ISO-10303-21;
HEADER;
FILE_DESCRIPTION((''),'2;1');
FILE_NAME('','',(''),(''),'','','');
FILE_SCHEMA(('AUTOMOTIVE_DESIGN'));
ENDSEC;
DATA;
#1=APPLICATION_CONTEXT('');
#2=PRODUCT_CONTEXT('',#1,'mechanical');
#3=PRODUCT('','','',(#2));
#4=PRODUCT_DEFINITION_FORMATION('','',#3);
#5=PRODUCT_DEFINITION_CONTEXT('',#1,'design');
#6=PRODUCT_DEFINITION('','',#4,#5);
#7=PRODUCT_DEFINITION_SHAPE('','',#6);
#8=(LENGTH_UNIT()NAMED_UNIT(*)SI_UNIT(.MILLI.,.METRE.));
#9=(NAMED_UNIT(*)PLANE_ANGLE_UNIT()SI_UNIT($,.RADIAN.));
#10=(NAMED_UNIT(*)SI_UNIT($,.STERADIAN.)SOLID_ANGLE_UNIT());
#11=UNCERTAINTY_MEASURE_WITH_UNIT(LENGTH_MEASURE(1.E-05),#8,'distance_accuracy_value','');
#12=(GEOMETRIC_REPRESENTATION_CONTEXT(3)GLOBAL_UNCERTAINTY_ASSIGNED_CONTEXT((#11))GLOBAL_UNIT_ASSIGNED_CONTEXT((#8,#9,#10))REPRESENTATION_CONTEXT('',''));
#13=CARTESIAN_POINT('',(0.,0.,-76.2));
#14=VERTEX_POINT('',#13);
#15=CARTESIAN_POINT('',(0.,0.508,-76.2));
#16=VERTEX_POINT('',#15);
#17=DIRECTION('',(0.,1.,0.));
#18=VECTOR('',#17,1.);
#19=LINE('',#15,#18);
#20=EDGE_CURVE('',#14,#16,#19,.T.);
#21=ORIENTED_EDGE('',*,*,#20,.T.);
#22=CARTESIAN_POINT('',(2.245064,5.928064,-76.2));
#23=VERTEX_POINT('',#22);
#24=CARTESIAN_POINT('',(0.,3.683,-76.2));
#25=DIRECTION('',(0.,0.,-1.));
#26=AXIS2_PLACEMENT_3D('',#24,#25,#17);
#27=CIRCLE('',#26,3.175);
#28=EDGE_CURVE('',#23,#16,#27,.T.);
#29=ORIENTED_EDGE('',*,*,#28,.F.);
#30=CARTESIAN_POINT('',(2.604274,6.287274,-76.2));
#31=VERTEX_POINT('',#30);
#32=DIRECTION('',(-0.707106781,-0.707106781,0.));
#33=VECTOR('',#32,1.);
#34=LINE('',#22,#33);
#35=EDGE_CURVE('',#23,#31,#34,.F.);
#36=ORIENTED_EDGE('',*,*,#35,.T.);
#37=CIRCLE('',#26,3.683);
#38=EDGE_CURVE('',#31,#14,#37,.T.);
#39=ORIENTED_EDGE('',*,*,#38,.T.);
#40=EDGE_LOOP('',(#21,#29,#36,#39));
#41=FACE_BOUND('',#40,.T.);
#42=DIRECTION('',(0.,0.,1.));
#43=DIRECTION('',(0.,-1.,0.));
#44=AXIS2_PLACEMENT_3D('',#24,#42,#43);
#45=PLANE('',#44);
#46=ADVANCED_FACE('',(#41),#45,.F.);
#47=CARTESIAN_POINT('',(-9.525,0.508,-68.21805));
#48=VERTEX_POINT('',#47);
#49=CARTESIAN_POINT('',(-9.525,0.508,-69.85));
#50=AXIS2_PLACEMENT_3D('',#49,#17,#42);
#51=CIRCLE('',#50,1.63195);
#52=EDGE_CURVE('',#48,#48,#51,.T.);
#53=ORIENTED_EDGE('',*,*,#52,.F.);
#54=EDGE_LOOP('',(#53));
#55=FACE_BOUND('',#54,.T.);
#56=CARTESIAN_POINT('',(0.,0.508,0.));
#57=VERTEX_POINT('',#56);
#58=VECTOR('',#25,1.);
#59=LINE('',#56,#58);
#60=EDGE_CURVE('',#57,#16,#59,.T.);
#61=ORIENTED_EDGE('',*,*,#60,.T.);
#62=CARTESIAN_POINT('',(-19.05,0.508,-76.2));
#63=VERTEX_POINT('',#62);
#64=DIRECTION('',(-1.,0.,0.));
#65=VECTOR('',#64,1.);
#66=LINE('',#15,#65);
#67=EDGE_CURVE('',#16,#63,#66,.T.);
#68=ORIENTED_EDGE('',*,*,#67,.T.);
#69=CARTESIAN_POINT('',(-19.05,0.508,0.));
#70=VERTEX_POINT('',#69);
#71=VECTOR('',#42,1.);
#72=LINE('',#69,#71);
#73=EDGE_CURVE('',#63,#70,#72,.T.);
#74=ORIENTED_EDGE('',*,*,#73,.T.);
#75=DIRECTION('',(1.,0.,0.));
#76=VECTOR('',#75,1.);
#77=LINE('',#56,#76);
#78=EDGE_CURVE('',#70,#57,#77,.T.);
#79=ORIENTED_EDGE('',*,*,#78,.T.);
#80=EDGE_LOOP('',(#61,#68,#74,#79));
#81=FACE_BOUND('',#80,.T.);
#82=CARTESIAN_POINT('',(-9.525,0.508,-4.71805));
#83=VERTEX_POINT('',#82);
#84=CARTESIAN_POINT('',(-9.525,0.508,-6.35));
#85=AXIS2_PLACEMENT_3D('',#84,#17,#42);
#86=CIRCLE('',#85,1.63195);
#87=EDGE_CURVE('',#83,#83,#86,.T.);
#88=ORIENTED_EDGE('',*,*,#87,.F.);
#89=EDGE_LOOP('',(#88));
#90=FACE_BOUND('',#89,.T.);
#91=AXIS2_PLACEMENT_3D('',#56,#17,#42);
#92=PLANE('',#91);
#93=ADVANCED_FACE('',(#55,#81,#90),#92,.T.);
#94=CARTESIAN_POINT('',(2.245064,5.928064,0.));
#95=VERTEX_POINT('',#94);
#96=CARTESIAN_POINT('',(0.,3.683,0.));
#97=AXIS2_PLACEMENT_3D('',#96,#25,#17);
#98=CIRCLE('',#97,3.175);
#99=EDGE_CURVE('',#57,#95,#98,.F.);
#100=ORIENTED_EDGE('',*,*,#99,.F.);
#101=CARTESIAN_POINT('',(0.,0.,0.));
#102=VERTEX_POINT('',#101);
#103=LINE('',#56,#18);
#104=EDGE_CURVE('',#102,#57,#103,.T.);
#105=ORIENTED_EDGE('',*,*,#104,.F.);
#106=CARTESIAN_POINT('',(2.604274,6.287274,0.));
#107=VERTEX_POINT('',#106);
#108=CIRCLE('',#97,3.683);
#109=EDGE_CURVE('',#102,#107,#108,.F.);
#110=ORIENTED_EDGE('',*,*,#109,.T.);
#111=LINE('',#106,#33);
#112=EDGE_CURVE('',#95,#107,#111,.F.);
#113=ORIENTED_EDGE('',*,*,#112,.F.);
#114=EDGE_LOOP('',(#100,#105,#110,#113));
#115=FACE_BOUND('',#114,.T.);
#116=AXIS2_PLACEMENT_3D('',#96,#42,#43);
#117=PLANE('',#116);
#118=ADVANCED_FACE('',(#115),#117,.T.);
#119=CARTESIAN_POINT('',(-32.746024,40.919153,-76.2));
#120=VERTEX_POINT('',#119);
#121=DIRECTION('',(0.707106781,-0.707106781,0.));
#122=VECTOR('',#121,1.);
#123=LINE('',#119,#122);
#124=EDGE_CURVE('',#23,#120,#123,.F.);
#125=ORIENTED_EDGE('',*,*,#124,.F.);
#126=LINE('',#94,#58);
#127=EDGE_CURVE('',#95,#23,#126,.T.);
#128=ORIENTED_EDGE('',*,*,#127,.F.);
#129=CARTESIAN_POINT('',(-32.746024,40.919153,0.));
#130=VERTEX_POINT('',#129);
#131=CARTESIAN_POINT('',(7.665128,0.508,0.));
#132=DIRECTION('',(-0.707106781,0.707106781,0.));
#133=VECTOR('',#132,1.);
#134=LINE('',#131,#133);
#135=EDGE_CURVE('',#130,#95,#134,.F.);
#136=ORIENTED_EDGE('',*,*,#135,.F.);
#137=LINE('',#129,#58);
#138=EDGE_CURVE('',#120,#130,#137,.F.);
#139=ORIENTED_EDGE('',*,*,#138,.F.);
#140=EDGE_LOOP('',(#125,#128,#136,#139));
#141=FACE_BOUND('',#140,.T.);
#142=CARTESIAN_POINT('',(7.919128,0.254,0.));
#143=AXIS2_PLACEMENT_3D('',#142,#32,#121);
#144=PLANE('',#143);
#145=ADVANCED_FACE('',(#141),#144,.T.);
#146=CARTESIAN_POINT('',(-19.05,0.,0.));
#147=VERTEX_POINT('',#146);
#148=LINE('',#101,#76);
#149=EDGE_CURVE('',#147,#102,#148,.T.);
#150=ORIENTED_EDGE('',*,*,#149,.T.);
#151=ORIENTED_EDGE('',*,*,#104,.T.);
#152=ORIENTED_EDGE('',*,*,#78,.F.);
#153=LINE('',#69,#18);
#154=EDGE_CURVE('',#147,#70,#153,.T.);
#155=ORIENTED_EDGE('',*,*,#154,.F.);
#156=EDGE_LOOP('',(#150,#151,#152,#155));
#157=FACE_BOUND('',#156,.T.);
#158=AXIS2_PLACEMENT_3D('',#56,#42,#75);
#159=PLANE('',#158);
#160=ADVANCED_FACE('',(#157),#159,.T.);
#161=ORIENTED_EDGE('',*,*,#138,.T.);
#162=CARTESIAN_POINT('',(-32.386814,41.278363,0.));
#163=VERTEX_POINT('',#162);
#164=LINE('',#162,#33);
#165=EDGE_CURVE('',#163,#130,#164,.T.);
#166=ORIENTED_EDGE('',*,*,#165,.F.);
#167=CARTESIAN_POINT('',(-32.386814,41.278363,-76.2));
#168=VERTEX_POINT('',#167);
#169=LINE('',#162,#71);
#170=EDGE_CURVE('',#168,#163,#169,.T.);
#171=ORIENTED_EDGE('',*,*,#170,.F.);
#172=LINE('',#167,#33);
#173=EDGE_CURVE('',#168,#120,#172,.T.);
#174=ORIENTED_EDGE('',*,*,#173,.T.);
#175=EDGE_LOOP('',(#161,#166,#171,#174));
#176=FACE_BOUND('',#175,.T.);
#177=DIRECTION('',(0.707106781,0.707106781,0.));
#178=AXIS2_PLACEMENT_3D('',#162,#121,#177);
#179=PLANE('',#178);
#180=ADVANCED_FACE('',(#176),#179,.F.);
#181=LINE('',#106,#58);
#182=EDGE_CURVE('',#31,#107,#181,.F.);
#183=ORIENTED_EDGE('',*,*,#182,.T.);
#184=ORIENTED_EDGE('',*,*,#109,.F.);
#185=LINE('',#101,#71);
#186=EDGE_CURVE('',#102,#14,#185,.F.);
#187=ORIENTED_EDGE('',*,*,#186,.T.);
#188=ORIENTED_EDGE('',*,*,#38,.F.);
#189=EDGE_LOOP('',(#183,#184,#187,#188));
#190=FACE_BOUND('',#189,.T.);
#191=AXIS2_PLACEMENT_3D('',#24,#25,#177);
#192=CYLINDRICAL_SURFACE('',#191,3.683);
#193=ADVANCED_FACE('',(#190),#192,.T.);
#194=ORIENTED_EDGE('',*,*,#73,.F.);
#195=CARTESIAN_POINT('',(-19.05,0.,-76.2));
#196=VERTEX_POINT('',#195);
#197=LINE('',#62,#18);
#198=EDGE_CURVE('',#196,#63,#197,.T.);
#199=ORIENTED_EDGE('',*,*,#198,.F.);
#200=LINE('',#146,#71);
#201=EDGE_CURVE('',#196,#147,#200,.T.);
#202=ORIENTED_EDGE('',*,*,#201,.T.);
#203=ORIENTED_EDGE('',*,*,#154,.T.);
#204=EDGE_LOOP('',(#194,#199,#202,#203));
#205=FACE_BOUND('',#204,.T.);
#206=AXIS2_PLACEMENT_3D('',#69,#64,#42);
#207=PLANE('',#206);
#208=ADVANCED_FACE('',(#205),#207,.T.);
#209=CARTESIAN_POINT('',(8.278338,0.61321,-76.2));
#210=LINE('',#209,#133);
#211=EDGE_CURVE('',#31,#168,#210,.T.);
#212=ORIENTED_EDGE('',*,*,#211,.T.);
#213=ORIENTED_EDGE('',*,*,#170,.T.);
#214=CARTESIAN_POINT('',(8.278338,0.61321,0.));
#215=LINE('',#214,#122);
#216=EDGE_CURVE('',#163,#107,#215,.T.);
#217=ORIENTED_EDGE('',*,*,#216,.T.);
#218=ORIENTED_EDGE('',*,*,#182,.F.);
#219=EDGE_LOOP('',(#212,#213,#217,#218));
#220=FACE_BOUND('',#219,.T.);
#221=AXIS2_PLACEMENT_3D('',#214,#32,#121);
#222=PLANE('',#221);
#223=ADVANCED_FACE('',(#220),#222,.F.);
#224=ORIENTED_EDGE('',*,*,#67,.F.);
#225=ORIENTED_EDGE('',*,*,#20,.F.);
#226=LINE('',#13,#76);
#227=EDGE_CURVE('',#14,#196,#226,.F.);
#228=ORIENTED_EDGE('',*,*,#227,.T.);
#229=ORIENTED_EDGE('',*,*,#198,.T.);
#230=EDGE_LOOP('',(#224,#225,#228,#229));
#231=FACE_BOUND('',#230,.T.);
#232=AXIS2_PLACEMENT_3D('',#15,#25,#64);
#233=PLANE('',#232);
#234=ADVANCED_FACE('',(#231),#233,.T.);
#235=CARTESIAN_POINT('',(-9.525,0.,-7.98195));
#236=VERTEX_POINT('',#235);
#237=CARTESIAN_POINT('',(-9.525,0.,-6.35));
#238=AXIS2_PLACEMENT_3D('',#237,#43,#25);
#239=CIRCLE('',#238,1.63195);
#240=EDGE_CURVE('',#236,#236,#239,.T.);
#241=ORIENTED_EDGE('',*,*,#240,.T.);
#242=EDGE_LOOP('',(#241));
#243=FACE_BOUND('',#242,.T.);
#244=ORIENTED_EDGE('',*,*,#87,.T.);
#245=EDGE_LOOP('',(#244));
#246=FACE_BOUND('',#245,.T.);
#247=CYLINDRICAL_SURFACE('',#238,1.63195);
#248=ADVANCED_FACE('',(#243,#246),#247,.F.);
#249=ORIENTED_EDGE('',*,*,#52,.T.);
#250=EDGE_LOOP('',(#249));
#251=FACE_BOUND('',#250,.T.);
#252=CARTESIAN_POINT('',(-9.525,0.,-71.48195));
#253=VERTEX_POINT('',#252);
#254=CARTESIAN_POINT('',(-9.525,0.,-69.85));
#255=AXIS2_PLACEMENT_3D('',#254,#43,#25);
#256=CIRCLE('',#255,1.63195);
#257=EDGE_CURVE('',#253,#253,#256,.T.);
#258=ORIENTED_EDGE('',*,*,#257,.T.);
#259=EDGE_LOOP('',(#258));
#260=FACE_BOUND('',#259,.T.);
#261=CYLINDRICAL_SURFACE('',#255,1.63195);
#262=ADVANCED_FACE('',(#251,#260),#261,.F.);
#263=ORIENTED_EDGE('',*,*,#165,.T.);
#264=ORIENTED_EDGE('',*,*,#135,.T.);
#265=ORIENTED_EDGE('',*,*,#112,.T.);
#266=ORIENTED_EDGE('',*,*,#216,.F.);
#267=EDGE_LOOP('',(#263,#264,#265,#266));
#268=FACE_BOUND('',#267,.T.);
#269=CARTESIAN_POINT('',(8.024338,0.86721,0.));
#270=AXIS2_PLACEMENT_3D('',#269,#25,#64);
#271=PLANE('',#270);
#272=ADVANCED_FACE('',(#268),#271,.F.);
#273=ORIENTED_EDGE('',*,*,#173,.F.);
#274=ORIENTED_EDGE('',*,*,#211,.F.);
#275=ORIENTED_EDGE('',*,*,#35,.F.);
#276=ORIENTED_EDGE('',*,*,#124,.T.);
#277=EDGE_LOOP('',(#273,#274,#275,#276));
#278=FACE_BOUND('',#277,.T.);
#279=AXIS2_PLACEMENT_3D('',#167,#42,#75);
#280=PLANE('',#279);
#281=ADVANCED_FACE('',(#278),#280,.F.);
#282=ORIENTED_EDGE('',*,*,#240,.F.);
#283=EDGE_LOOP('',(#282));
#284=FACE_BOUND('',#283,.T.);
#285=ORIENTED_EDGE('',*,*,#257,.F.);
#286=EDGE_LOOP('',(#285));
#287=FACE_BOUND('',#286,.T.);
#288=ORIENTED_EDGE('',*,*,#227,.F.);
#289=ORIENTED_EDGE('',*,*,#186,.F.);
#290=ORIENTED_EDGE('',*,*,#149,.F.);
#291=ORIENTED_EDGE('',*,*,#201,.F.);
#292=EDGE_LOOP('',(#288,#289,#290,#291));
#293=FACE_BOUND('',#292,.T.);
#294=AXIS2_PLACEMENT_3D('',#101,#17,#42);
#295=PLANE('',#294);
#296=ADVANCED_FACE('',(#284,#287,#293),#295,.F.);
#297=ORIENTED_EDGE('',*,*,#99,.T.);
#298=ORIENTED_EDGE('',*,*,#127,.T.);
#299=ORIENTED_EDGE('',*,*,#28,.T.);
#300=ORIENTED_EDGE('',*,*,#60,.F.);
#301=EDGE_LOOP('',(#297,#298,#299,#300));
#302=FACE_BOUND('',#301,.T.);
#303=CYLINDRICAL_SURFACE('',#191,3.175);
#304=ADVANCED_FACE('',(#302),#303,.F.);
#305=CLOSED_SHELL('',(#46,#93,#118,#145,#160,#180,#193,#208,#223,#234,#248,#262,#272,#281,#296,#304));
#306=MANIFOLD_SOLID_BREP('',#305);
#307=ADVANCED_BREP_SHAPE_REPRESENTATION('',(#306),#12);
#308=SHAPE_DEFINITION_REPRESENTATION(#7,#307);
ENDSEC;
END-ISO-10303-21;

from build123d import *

# Parameters (mm, degrees)
SKETCH2_W                 = 19.05
SKETCH2_H                 = 76.2
BOSS_EXTRUDE2_DEPTH       = 0.508
EDGE_FLANGE2_DEPTH        = 76.2
F_4_CLEARANCE_HOLE1_D     = 3.2639
F_4_CLEARANCE_HOLE1_DEPTH = 0.508


# Sheet-metal steps are written as plain solids
with BuildPart() as part:
    # Sketch2 → Boss-Extrude2 (new body)
    with BuildSketch(Plane(origin=(0, 0, 0), x_dir=(1, 0, 0), z_dir=(0, 1, 0))):
        with Locations((-9.525, 38.1)):
            Rectangle(SKETCH2_W, SKETCH2_H)
    extrude(amount=BOSS_EXTRUDE2_DEPTH)

    # Edge-Flange2 section (across the edge) → Edge-Flange2 (add)
    with BuildSketch(Plane(origin=(7.665128061, 0.508, 0), x_dir=(-0.7071067811865488, -0.7071067811865464, 0), z_dir=(0, 0, -1))):
        with BuildLine():
            Line((-0.508, 7.665128061), (-0.508, 57.15))
            Line((-0.508, 57.15), (0, 57.15))
            Line((0, 57.15), (0, 7.665128061))
            ThreePointArc((0, 7.665128061), (1.959980102, 4.731810545), (5.42006403, 5.42006403))
            Line((5.42006403, 5.42006403), (5.779274275, 5.060853785))
            ThreePointArc((5.779274275, 5.060853785), (1.765576919, 4.262479742), (-0.508, 7.665128061))
        make_face()
    extrude(amount=EDGE_FLANGE2_DEPTH)

    # #4 Clearance Hole1
    with Locations(Plane(origin=(0, 0, 0), x_dir=(-1, 0, 0), z_dir=(0, -1, 0))):
        with Locations((9.525, 69.85), (9.525, 6.35)):
            Hole(F_4_CLEARANCE_HOLE1_D / 2, depth=F_4_CLEARANCE_HOLE1_DEPTH)


solid = part.part
